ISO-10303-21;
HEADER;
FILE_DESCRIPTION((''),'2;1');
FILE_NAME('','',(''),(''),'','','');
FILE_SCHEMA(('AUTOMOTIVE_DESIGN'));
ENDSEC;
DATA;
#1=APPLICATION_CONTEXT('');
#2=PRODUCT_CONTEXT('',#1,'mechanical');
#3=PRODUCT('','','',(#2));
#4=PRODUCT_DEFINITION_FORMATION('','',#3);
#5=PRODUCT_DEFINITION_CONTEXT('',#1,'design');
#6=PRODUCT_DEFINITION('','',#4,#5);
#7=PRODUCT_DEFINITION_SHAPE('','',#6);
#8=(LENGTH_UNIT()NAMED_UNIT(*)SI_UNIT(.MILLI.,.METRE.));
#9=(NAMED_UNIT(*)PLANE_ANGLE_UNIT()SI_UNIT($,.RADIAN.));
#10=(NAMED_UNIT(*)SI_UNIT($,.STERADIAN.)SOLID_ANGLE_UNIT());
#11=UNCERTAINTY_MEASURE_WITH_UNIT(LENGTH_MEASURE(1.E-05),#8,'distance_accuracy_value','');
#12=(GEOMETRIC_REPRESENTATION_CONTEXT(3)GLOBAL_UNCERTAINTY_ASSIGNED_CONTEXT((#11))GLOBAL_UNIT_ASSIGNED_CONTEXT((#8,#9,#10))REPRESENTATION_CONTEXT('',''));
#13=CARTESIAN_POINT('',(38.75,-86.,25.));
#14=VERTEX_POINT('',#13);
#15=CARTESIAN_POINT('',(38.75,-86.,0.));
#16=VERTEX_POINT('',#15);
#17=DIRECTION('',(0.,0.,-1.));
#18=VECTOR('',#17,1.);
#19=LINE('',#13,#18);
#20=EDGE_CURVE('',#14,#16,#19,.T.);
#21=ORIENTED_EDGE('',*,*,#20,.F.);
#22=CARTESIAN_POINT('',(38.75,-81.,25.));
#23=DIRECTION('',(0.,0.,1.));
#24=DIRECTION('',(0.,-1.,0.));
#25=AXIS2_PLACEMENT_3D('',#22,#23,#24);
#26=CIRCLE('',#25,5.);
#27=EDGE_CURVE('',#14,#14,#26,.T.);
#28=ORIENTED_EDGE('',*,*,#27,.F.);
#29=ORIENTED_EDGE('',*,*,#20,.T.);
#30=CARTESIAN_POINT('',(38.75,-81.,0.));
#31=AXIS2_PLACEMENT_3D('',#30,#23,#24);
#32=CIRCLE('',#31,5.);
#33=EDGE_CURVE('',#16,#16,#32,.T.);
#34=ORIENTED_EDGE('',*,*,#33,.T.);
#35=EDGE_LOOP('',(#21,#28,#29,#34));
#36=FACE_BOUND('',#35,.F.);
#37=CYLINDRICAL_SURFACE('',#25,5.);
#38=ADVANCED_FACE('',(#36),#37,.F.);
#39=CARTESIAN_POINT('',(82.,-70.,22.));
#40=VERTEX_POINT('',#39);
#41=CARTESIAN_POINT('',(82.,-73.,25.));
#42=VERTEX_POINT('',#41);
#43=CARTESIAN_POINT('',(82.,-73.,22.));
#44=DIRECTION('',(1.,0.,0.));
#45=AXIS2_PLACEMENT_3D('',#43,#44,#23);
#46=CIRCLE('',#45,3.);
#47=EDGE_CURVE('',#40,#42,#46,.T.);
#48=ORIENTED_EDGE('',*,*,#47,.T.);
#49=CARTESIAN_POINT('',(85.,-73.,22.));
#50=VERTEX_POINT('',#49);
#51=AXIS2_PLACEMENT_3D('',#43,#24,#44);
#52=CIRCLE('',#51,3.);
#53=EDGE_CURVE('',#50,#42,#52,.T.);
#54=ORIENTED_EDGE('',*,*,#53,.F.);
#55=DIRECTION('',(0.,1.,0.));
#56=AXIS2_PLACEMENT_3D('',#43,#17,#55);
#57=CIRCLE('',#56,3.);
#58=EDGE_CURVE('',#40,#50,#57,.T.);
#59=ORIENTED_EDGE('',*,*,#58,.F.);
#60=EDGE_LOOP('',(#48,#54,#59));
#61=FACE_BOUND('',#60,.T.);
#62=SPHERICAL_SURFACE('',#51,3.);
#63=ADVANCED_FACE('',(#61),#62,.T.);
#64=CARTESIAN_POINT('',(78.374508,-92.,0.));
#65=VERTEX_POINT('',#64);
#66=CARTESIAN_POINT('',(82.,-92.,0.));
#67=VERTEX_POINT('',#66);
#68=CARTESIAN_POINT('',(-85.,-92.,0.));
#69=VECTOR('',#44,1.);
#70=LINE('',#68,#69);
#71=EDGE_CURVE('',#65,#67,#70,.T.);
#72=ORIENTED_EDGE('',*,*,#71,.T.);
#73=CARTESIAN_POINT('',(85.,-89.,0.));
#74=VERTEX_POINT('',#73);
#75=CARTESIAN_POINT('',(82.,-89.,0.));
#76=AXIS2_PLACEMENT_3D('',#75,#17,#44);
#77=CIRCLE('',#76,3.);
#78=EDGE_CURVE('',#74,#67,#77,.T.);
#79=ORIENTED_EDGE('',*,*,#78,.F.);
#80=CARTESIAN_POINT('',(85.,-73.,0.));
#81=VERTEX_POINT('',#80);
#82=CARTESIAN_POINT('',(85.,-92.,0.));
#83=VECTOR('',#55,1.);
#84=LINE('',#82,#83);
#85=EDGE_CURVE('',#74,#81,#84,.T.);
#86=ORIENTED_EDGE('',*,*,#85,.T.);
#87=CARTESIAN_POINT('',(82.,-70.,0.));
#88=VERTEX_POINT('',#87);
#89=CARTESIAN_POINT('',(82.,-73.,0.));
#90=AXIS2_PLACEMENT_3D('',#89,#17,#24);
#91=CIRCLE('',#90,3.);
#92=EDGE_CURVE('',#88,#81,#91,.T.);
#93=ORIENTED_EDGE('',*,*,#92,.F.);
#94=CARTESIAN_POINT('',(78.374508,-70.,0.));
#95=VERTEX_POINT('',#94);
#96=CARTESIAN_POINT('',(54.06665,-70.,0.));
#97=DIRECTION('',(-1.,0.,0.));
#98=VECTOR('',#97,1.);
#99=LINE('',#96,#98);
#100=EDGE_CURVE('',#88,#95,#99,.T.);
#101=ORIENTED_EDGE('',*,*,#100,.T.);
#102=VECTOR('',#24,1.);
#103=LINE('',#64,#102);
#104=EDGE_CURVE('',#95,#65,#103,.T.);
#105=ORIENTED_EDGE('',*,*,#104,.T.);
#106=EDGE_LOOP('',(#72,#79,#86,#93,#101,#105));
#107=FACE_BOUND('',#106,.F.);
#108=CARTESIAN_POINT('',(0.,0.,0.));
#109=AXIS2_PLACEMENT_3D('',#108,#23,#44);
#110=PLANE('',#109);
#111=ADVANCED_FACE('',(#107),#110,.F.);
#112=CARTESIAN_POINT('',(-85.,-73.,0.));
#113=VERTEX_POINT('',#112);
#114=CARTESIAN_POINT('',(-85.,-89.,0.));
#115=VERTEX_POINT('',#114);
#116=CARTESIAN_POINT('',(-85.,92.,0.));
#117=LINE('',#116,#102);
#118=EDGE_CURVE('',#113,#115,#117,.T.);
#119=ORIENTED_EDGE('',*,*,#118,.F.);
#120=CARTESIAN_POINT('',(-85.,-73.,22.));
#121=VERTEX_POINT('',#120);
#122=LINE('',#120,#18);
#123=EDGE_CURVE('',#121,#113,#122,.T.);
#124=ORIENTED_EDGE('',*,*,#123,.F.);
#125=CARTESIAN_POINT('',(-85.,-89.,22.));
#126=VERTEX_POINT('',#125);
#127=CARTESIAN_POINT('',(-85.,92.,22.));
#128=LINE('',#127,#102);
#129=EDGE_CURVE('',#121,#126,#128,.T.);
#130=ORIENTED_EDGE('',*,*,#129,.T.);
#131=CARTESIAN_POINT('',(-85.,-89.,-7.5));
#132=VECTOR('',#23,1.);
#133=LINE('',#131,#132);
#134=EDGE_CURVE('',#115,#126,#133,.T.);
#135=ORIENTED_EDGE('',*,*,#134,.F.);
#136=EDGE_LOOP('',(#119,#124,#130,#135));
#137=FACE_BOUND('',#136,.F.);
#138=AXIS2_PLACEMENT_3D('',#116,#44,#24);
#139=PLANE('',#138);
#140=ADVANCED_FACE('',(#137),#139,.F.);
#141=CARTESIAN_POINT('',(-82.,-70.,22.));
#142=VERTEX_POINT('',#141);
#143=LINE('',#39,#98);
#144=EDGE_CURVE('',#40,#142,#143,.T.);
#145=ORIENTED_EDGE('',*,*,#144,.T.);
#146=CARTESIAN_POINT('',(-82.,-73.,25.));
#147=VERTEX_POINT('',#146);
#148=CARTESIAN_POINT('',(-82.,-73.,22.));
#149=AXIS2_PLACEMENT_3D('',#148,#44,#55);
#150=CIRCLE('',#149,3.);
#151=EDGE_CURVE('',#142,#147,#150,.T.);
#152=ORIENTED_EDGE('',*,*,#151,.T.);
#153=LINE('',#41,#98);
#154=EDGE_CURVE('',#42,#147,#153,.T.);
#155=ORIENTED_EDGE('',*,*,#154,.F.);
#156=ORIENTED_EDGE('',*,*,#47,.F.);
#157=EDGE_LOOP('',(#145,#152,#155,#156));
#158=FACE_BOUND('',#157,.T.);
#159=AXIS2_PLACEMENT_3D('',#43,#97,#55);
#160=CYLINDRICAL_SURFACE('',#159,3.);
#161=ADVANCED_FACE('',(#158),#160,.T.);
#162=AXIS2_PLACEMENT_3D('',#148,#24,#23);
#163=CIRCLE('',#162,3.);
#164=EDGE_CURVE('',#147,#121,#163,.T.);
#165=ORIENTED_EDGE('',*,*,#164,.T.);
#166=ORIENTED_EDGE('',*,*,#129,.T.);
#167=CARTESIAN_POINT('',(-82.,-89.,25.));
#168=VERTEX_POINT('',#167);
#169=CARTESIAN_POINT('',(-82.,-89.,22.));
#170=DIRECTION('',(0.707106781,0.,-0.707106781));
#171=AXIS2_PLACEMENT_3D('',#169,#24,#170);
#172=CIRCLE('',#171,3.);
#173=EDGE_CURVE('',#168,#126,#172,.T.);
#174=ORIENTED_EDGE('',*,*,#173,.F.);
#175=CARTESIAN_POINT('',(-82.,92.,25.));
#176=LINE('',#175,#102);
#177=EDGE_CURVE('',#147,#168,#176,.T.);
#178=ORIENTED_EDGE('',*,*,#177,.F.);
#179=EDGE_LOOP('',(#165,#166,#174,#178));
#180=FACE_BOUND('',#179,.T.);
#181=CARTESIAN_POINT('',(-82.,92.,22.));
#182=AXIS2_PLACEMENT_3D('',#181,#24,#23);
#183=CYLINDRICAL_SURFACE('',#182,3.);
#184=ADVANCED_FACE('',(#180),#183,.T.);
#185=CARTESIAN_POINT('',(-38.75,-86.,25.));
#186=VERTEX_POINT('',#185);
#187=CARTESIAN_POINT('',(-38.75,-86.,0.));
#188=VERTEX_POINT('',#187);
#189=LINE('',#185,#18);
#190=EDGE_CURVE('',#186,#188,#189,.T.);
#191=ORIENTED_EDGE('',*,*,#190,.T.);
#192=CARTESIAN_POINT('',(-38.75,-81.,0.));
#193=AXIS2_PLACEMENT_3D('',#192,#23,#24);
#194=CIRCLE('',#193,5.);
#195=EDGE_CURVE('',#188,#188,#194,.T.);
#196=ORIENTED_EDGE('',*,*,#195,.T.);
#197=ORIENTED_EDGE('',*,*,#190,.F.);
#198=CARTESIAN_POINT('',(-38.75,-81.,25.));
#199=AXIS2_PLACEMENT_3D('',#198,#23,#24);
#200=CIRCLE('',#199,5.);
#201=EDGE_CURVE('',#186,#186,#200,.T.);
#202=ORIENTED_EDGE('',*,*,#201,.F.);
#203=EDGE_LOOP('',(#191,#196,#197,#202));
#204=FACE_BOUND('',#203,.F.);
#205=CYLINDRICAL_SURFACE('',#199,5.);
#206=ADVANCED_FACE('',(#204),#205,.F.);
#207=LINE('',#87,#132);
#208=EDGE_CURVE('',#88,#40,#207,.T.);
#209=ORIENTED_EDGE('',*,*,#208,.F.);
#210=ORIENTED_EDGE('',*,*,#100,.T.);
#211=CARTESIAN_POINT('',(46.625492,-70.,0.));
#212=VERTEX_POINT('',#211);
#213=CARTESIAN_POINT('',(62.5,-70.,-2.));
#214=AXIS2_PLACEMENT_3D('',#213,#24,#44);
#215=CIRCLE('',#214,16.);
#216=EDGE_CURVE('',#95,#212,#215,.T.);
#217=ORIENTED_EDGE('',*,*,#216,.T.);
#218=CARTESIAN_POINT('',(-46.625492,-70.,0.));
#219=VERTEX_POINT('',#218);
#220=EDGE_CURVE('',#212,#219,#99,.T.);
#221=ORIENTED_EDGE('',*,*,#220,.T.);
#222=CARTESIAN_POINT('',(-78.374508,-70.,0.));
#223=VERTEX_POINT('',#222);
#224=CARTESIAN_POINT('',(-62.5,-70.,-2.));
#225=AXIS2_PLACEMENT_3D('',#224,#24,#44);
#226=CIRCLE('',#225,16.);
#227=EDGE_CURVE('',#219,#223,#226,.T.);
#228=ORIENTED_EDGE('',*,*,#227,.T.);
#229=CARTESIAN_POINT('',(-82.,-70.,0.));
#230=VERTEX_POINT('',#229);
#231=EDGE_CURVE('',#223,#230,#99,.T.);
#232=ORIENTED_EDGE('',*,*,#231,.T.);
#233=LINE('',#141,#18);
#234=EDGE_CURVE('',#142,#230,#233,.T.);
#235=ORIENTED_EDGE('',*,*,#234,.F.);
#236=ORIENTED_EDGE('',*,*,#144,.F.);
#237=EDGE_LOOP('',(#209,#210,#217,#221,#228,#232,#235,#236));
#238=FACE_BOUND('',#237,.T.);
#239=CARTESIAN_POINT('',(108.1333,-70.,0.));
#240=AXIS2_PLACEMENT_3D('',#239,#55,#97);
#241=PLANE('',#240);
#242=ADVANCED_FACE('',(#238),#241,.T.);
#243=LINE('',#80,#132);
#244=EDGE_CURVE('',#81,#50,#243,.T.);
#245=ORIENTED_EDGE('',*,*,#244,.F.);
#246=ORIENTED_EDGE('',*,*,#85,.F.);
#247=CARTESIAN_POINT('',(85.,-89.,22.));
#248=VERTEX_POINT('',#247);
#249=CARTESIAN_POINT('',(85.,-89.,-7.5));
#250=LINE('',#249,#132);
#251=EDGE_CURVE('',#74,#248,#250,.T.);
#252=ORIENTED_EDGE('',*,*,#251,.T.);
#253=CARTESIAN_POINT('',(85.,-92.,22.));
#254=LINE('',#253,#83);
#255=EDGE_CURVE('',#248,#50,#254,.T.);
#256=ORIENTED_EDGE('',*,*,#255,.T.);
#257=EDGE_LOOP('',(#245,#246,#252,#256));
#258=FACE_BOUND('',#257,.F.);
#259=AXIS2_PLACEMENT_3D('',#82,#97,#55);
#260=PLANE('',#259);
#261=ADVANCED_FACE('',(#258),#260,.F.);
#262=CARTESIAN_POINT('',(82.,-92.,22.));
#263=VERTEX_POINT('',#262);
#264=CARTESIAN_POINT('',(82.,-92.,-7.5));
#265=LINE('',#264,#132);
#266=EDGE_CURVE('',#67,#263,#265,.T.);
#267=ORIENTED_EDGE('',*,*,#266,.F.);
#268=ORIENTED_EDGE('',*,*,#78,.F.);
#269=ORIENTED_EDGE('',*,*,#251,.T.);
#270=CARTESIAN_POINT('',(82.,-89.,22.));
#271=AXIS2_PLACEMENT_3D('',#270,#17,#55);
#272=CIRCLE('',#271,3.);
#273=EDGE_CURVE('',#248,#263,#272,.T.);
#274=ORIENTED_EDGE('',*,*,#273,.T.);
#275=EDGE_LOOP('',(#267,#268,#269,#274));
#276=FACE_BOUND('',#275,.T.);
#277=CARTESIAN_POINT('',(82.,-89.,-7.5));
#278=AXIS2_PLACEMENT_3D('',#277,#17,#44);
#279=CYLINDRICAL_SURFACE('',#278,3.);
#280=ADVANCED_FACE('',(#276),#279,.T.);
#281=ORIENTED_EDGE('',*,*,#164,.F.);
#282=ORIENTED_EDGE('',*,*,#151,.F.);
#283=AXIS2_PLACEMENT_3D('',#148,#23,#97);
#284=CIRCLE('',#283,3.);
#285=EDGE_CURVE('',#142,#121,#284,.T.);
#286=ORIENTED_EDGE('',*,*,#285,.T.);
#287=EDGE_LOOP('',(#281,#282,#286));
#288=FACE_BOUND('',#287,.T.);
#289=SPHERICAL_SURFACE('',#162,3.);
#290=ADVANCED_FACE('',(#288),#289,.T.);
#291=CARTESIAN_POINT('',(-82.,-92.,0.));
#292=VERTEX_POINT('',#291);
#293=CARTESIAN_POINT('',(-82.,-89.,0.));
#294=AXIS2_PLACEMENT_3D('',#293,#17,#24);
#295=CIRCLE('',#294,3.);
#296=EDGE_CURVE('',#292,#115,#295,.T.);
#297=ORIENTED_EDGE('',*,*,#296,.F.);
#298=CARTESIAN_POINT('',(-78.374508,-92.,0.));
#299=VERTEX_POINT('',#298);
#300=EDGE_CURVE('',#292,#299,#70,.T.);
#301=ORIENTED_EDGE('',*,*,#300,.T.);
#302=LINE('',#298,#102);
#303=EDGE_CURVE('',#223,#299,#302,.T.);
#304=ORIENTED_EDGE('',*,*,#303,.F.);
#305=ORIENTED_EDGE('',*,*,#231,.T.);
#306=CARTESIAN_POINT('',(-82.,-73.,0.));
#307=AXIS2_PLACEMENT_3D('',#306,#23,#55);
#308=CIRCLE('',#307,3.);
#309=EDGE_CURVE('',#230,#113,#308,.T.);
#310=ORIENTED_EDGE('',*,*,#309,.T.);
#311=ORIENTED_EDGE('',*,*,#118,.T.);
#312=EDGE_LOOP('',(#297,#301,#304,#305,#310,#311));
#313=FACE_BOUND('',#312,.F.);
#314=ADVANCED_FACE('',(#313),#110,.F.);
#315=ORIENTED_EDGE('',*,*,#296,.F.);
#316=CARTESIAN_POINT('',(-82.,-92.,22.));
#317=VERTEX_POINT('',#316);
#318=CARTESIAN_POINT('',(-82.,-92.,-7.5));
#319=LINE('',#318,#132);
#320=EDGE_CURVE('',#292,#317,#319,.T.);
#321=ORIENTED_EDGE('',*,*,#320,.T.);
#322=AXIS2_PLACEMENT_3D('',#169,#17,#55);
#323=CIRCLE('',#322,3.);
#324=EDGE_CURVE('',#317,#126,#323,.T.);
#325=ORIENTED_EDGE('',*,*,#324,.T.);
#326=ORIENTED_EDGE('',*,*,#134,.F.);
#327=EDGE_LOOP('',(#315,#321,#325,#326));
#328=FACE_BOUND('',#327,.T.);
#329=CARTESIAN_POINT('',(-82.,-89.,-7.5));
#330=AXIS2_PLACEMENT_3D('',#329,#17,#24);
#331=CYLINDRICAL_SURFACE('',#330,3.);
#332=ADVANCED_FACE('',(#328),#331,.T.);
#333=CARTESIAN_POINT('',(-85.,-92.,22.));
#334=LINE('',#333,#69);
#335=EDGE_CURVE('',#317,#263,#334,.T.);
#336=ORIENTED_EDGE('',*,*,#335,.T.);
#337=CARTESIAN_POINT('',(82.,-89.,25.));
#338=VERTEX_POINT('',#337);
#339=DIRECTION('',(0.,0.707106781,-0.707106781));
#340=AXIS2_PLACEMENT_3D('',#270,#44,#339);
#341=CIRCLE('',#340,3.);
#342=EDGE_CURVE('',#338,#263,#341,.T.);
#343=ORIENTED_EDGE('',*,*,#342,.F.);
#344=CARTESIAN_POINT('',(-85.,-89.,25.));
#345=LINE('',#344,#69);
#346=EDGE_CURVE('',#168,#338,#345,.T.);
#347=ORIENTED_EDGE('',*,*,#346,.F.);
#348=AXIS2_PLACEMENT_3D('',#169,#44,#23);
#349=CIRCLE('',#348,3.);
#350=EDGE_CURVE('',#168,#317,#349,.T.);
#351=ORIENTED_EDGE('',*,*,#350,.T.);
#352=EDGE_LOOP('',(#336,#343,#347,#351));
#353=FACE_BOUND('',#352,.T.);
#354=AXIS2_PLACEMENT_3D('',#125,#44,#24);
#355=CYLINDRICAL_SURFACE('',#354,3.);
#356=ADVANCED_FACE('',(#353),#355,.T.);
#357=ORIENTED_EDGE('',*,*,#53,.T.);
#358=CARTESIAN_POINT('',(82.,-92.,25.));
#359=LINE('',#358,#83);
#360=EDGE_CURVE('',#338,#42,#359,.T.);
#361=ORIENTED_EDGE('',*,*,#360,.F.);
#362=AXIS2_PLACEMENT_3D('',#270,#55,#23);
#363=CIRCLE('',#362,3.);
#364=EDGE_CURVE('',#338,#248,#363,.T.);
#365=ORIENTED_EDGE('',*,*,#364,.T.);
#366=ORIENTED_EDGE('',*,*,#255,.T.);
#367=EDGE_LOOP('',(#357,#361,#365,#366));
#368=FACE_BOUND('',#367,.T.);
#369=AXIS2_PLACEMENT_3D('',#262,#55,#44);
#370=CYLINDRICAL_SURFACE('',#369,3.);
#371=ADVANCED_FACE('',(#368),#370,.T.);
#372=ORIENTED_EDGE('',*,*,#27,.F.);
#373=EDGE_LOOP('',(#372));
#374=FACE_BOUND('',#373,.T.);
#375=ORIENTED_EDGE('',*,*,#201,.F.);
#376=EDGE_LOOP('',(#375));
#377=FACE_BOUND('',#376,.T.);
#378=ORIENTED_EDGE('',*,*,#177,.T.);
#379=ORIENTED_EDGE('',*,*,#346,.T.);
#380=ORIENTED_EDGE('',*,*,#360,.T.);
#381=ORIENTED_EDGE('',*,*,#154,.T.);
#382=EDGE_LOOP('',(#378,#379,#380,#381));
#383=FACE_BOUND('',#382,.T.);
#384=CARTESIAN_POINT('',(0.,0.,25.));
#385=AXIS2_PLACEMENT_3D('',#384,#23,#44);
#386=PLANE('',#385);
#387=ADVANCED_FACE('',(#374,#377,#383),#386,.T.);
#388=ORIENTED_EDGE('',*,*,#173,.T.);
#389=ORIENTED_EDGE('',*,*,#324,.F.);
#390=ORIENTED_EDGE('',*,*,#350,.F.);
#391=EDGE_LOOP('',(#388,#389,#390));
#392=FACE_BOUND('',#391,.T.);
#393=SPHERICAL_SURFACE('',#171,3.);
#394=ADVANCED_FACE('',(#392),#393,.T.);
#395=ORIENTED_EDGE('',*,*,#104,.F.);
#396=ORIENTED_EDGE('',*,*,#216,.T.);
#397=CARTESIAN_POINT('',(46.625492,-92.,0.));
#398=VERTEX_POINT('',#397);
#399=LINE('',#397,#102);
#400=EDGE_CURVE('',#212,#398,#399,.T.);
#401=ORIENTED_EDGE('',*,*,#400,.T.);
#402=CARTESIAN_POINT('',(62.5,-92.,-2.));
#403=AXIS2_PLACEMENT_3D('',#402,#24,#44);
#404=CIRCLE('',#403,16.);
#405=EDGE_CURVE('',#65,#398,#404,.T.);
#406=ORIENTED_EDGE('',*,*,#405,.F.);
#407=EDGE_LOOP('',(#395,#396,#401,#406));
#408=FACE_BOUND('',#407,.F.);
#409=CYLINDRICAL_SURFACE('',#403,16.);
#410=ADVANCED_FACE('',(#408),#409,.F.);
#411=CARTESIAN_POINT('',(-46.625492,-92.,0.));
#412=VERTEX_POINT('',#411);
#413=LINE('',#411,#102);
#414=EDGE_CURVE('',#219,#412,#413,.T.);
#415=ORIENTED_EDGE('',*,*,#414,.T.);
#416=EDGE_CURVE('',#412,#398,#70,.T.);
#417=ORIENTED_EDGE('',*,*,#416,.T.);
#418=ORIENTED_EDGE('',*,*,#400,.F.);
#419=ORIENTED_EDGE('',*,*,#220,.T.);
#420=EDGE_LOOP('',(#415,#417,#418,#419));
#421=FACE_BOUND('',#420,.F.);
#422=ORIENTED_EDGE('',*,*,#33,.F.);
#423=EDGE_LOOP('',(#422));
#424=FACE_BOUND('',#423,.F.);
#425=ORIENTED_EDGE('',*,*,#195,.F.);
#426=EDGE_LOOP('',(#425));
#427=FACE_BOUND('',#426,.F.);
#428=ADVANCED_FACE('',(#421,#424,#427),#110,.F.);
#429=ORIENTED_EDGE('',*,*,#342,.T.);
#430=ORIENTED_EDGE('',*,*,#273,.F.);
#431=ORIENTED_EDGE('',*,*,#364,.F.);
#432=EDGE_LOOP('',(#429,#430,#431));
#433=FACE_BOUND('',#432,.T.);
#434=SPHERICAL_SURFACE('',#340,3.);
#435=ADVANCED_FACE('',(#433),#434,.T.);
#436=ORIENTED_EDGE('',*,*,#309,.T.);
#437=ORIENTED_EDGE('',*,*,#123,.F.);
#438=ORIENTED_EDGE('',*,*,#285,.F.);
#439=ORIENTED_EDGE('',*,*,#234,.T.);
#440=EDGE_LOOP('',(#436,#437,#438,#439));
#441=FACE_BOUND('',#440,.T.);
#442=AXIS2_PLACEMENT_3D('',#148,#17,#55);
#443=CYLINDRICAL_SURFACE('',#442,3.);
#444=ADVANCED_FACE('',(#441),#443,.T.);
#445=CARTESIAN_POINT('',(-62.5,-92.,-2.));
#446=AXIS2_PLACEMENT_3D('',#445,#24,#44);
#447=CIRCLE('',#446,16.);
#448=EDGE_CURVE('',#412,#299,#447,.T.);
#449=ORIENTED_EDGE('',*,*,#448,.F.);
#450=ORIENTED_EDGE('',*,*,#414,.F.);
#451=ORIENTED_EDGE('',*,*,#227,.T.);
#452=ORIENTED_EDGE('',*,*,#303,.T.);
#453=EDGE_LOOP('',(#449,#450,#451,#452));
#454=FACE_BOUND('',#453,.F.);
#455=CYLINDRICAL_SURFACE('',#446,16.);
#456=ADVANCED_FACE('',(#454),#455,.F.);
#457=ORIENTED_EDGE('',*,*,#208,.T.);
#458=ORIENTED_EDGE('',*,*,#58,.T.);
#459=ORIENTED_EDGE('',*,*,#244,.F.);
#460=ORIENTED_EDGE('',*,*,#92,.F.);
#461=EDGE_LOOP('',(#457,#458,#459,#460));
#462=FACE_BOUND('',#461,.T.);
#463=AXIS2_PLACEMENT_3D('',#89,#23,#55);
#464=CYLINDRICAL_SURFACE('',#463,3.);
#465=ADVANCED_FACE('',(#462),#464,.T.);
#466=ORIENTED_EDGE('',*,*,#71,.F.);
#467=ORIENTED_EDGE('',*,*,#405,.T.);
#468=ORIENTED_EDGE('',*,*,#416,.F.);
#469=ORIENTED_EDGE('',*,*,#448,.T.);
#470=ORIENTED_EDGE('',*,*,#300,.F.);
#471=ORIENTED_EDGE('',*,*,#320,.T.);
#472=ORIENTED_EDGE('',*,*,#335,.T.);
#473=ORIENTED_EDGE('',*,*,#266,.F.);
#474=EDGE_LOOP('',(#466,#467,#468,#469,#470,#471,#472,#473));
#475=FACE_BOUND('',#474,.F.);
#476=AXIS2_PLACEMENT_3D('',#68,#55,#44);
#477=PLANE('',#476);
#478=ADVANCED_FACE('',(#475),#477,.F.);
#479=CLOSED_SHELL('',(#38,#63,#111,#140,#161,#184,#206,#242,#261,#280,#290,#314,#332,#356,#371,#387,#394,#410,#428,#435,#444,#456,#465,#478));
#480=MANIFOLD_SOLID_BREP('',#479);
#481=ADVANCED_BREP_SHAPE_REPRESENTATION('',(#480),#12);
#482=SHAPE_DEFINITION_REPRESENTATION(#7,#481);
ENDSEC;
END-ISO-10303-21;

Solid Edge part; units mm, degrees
sketch "Sketch1" plane through (0, 0, 0) normal (0, 0, 1) x (1, 0, 0)
  line L0 (-85, -92) -> (85, -92)
  line L1 (85, -92) -> (85, 92)
  line L2 (85, 92) -> (-85, 92)
  line L3 (-85, 92) -> (-85, -92)
  dimension "D1" = 184
  dimension "D2" = 170
extrude "Protrusion1" add sketch "Sketch1" along normal blind 25
sketch "Sketch2" plane through (0, -92, 12.5) normal (0, -1, 0) x (1, 0, 0)
  circle A0 centre (-62.5, -14.5) radius 16
  circle A1 centre (62.5, -14.5) radius 16
  dimension "D1" = 22.5
  dimension "D2" = 2
  dimension "D3" = 22.5
  dimension "D4" = 2
  dimension "D5" = 32
  dimension "D6" = 32
extrude "Cutout1" cut sketch "Sketch2" along normal mid plane 529.2958
sketch "Sketch3" plane through (0, 0, 25) normal (0, 0, 1) x (0, -1, 0)
  circle A0 centre (81, 38.75) radius 5
  circle A1 centre (-81, 38.75) radius 5
  circle A2 centre (-81, -38.75) radius 5
  circle A3 centre (81, -38.75) radius 5
  dimension "D1" = 77.5
  dimension "D2" = 77.5
  dimension "D3" = 162
  dimension "D4" = 11
  dimension "D5" = 46.25
  dimension "D6" = 11
  dimension "D7" = 46.25
  dimension "D8" = 46.25
extrude "ExtrudedCutout_2" cut sketch "Sketch3" along normal mid plane 360.8334
fillet "Round_1" radius 3 4 edges at (0, 92, 25) (85, 0, 25) (0, -92, 25) (-85, 0, 25)
sketch "Sketch4" plane through (0, 0, 0) normal (0, 0, -1) x (-1, 0, 0)
  line L0 (-108.1333, -70) -> (102.1809, -70)
  line L1 (102.1809, -70) -> (102.1809, 115.1165)
  line L2 (102.1809, 115.1165) -> (-108.1333, 115.1165)
  line L3 (-108.1333, 115.1165) -> (-108.1333, -70)
extrude "Cutout2" cut sketch "Sketch4" along normal mid plane 462.6347
fillet "Round_2" radius 3 4 edges at (0, -70, 25) (-84.1213, -70, 24.1213) (-85, -70, 11) (85, -70, 11)
fillet "Round1" radius 3 4 edges at (85, -92, 11) (84.1213, -91.1213, 24.1213) (-85, -92, 11) (-84.1213, -91.1213, 24.1213)
properties material "Aluminum, 6061-T6"
